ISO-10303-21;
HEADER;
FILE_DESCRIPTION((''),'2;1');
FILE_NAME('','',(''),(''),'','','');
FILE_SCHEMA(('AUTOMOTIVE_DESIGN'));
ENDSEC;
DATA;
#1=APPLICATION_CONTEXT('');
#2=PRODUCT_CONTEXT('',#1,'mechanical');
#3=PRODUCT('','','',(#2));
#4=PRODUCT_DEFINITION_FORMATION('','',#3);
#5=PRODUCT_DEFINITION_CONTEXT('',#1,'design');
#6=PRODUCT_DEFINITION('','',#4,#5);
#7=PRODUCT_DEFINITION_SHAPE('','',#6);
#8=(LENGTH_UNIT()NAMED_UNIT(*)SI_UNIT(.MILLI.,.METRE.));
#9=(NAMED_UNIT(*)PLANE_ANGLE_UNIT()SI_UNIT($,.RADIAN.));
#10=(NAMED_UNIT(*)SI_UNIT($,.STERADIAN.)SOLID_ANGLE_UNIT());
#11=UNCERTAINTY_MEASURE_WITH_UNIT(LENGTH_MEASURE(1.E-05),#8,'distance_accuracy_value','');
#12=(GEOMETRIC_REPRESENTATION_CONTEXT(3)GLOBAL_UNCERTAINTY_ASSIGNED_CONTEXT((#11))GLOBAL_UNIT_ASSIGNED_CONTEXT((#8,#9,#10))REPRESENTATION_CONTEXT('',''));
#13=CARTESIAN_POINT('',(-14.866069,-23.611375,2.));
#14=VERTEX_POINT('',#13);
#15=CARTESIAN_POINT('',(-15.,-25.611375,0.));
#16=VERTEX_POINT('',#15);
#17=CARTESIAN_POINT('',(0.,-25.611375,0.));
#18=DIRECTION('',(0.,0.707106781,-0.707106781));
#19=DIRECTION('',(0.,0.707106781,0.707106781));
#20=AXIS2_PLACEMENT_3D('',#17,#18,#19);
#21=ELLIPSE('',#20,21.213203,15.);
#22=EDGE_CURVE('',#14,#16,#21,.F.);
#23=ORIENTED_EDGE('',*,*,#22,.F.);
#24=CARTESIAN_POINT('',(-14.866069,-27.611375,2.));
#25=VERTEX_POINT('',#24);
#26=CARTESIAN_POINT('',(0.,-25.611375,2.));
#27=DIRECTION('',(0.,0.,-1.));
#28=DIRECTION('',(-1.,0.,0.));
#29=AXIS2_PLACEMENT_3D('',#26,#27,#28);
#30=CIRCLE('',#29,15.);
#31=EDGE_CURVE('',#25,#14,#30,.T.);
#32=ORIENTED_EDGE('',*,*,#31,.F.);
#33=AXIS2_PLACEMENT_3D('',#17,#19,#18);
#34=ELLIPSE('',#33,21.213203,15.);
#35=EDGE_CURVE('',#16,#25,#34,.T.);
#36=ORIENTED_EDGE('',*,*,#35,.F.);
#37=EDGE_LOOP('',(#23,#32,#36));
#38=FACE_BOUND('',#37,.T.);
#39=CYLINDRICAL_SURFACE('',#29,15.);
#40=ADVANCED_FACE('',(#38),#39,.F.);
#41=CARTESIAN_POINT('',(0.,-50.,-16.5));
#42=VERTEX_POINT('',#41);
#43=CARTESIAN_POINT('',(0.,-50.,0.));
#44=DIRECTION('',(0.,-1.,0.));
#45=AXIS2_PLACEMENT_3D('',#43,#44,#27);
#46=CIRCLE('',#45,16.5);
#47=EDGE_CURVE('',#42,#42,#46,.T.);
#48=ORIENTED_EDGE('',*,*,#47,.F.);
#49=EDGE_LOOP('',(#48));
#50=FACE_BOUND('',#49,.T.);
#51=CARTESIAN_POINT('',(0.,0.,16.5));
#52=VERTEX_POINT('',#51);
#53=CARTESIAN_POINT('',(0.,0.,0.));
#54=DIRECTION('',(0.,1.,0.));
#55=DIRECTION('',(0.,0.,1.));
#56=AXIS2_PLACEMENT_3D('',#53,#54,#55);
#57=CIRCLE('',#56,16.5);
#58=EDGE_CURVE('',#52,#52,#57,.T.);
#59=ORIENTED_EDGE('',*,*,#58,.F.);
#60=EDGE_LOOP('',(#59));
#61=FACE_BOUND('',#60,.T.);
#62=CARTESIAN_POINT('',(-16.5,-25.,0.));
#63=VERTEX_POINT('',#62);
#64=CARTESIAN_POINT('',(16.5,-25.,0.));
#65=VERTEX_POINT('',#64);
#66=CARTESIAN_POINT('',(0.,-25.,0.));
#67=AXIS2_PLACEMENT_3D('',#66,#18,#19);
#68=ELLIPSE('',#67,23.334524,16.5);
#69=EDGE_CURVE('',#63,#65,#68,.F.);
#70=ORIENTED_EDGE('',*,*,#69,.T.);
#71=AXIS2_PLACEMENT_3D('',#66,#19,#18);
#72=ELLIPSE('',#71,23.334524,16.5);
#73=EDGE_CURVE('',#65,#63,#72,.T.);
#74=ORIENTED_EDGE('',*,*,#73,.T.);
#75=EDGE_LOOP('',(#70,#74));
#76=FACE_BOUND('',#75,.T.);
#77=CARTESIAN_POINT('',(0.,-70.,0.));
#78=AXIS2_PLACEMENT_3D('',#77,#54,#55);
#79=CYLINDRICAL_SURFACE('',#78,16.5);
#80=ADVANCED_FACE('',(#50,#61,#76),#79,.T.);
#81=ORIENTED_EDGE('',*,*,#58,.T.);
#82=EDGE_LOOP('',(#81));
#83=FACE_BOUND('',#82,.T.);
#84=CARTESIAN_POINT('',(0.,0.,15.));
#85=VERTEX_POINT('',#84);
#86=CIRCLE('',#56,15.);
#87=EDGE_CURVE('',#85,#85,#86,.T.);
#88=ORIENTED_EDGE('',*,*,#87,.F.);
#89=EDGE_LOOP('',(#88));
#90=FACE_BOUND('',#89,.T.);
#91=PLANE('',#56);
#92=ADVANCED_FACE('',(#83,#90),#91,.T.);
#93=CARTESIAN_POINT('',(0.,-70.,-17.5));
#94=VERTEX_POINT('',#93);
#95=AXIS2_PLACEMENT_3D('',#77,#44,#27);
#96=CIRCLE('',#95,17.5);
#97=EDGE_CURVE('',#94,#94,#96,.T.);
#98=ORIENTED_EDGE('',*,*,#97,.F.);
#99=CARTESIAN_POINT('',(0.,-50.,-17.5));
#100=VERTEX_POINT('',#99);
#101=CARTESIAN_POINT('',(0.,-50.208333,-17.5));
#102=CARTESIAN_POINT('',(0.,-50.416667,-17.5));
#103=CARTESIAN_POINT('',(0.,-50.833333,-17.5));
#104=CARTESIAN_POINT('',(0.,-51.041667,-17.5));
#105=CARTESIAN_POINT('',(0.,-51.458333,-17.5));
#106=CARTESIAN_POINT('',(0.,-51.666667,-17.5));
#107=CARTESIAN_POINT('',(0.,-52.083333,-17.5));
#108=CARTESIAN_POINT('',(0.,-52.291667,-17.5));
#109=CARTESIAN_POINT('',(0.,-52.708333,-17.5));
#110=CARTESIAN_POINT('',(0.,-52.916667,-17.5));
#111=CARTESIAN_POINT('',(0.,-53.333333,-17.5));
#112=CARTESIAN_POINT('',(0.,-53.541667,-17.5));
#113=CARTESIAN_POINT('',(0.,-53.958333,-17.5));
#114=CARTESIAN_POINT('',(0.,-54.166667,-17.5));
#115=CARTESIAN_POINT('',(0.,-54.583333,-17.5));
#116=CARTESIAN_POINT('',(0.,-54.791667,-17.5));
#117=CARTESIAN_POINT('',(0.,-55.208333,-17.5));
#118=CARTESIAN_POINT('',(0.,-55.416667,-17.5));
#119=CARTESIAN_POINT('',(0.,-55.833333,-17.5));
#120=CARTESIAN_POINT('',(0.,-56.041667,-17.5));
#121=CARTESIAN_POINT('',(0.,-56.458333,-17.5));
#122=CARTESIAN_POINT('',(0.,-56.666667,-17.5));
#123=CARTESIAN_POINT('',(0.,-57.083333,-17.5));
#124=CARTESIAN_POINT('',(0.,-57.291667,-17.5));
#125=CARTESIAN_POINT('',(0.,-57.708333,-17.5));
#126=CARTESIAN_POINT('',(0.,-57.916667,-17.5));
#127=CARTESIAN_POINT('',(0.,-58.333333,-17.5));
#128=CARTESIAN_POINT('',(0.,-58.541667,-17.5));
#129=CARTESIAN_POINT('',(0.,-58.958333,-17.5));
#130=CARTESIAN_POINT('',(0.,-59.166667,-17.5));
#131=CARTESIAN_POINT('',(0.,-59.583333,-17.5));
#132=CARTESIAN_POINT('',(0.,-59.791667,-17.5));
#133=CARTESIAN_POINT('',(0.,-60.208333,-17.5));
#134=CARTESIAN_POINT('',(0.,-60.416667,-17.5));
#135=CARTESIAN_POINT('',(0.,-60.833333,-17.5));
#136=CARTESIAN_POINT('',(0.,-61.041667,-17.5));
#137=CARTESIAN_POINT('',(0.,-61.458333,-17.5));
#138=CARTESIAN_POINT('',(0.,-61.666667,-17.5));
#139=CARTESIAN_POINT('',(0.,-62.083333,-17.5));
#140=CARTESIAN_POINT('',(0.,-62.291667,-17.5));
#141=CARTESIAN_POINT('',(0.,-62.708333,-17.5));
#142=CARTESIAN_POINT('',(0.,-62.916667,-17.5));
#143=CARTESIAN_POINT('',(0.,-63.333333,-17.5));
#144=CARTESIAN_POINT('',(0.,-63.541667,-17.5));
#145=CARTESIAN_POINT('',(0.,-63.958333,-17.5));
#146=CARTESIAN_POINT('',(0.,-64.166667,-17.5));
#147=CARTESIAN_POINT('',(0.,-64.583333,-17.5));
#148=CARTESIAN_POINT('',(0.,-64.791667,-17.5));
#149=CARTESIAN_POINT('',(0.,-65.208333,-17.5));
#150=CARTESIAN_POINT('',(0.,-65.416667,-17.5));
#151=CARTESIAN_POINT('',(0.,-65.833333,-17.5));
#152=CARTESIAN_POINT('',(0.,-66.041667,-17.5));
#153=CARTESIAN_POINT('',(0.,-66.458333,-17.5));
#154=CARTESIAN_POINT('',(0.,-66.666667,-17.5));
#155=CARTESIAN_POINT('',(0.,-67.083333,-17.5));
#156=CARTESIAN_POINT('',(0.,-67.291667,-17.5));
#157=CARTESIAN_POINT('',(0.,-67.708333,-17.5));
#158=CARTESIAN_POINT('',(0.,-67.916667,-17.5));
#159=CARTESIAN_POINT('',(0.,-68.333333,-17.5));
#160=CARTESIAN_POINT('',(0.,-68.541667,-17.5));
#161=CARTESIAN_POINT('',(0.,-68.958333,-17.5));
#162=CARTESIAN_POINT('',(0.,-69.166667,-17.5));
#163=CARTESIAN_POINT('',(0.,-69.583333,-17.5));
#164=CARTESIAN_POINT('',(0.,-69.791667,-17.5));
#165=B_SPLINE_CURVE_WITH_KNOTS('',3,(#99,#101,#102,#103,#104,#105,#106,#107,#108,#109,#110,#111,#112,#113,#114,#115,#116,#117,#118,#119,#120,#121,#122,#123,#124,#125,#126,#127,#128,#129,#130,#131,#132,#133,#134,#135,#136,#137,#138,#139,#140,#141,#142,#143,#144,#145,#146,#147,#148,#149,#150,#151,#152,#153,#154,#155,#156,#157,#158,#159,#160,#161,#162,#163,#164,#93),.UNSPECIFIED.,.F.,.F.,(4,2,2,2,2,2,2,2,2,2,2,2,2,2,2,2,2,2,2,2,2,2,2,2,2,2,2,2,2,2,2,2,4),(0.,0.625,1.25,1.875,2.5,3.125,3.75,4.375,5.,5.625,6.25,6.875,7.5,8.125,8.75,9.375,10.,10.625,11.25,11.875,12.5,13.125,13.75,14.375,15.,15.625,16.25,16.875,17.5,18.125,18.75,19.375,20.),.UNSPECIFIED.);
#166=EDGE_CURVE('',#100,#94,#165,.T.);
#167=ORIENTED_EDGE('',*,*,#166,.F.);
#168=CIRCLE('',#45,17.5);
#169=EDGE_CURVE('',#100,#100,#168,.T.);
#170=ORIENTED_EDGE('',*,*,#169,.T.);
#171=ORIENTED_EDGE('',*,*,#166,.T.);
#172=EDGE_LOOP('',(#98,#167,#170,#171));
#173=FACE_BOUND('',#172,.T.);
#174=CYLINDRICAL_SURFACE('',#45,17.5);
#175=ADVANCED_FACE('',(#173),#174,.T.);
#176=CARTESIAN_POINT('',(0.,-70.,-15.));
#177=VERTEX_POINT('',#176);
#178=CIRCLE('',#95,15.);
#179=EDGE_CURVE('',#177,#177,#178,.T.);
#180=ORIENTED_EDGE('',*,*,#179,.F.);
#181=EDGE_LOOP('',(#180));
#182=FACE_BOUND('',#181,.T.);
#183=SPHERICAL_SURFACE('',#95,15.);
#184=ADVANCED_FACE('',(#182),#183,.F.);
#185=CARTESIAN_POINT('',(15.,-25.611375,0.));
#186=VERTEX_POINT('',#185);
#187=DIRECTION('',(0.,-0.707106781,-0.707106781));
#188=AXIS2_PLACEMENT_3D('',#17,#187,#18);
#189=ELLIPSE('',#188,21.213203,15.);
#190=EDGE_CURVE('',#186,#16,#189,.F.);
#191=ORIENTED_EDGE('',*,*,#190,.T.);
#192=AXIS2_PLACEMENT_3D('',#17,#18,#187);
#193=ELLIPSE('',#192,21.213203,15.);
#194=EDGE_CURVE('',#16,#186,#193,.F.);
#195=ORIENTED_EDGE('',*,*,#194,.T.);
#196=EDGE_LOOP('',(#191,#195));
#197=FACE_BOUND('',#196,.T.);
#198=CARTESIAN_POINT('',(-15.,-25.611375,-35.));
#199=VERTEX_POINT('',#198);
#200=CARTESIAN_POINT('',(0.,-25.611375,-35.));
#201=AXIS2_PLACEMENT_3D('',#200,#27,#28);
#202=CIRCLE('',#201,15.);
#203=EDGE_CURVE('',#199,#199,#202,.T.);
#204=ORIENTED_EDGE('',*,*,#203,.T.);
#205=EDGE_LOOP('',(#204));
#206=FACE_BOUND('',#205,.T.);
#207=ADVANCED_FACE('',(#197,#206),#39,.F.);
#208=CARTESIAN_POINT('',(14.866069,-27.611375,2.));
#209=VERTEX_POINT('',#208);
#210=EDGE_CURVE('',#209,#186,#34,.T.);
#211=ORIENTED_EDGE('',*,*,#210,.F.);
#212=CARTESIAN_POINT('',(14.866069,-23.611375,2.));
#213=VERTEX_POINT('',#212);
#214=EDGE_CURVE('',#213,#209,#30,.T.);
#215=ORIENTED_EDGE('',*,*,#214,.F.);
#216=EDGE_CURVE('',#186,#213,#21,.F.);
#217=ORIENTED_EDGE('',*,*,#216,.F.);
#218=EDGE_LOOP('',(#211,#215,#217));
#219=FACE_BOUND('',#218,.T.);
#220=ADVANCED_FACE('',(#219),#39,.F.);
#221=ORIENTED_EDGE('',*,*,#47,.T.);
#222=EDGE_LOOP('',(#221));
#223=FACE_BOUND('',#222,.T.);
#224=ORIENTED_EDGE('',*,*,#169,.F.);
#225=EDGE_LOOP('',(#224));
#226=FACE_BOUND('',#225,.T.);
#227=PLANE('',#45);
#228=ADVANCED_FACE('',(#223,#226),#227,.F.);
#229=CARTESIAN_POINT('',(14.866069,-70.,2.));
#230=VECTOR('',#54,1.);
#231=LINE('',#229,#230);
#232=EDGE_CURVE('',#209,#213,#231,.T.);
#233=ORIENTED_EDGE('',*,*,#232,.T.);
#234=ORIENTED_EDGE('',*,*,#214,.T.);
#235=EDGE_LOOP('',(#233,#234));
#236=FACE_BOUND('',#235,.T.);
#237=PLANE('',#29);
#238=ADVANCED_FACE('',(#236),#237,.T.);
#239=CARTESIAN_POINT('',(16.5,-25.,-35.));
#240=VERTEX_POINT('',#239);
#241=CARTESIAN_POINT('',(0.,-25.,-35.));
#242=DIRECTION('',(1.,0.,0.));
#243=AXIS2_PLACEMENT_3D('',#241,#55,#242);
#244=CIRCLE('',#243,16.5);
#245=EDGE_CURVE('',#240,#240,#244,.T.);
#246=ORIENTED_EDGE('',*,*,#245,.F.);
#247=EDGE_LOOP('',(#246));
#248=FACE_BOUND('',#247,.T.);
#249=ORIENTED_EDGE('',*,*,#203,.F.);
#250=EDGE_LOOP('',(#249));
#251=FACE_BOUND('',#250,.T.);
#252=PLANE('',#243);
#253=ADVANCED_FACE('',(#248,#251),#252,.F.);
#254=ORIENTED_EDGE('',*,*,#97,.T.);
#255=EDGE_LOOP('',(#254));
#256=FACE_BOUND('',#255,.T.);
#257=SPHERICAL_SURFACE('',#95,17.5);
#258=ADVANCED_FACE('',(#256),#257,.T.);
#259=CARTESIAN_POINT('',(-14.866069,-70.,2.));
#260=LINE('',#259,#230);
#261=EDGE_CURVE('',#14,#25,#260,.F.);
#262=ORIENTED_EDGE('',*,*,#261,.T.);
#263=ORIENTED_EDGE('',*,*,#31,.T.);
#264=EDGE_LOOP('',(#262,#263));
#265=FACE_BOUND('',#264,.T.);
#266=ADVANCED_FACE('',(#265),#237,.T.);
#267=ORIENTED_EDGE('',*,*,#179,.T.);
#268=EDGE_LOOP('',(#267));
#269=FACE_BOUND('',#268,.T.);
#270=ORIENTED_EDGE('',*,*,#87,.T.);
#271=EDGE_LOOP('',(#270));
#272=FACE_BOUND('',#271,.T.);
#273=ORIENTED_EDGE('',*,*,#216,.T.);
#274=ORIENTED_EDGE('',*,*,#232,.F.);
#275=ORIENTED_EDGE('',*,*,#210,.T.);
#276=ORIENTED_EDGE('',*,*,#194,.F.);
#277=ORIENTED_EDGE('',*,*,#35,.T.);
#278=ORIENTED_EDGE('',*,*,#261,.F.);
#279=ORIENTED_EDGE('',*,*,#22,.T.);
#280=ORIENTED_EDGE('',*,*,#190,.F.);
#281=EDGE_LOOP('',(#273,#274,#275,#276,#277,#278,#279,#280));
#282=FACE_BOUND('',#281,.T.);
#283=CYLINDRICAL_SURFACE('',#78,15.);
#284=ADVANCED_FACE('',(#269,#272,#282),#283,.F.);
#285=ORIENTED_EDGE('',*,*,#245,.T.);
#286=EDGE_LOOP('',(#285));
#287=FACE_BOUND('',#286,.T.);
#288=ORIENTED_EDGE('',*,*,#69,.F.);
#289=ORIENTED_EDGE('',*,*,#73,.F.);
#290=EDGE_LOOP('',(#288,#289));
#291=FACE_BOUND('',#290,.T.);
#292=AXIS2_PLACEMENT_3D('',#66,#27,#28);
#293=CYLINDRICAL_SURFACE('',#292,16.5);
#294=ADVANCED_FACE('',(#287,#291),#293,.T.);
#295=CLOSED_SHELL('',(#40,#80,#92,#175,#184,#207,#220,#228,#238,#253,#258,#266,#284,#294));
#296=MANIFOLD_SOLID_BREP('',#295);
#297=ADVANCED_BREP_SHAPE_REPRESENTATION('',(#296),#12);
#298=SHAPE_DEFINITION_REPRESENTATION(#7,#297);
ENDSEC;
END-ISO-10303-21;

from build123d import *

# Parameters (mm, degrees)
SKETCH1_R                = 15
BOSS_EXTRUDE1_DEPTH      = 70
SKETCH7_R                = 17.5
BOSS_EXTRUDE2_DEPTH      = 20
SKETCH8_R                = 16.5
SKETCH8_R_2              = 15
BOSS_EXTRUDE4_DEPTH      = 70
SKETCH10_R               = 15
CUT_EXTRUDE2_DEPTH       = 70
SKETCH24_R               = 15
CUT_EXTRUDE4_DEPTH       = 22
BOSS_EXTRUDE5_DEPTH      = 15
BOSS_EXTRUDE5_DEPTH_BACK = 20
SKETCH30_R               = 16.5
SKETCH31_R               = 15
CUT_EXTRUDE5_DEPTH       = 37
SKETCH32_R               = 15
CUT_EXTRUDE6_DEPTH       = 55


# Read off the part's stored shape, not the designer's step: Revolve1
with BuildPart() as part:
    # Sketch1 → Boss-Extrude1 (new body)
    with BuildSketch(Plane(origin=(0, 0, 0), x_dir=(1, 0, 0), z_dir=(0, 1, 0))):
        with Locations(Location((0, 0, 0), (0, 0, 270))):
            Circle(SKETCH1_R)
    extrude(amount=-BOSS_EXTRUDE1_DEPTH)

    # Sketch7 → Boss-Extrude2 (add)
    with BuildSketch(Plane.XZ.offset(70)):
        with Locations(Location((0, 0, 0), (0, 0, 270))):
            Circle(SKETCH7_R)
    extrude(amount=-BOSS_EXTRUDE2_DEPTH)

    # Sketch8 → Boss-Extrude4 (add)
    with BuildSketch(Plane(origin=(0, 0, 0), x_dir=(1, 0, 0), z_dir=(0, 1, 0))):
        with Locations(Location((0, 0, 0), (0, 0, 270))):
            Circle(SKETCH8_R)
        Circle(SKETCH8_R_2, mode=Mode.SUBTRACT)
    extrude(amount=-BOSS_EXTRUDE4_DEPTH)

    # Sketch10 → Cut-Extrude2 (cut)
    with BuildSketch(Plane(origin=(0, 0, 0), x_dir=(1, 0, 0), z_dir=(0, 1, 0))):
        with Locations(Location((0, 0, 0), (0, 0, 270))):
            Circle(SKETCH10_R)
    extrude(amount=-CUT_EXTRUDE2_DEPTH, mode=Mode.SUBTRACT)

    # Revolve1 outline → Revolve1 (revolve)
    with BuildSketch(Plane.XY):
        with BuildLine():
            Line((17.5, -69.999999983), (0, -69.999999992))
            Line((0, -69.999999992), (0, -87.5))
            ThreePointArc((0, -87.5), (12.374368677, -82.374368665), (17.5, -69.999999983))
        make_face()
    revolve(axis=Axis((0, 0, 0), (0, 1, 0)))

    # Sketch24 → Cut-Extrude4 (cut)
    with BuildSketch(Plane.XY):
        with Locations((0, -25)):
            Circle(SKETCH24_R)
    extrude(amount=-CUT_EXTRUDE4_DEPTH, mode=Mode.SUBTRACT)

    # Sketch28 → Cut-Revolve1 (revolve, cut)
    with BuildSketch(Plane.XY):
        with BuildLine():
            Line((15, -70), (-15, -70))
            ThreePointArc((-15, -70), (0, -85), (15, -70))
        make_face()
    revolve(axis=Axis((-15, -70, 0), (1, 0, 0)), mode=Mode.SUBTRACT)

    # Sketch30 → Boss-Extrude5 (add, two sides: drawn at the far end of the back side and taken through both)
    with BuildSketch(Plane.XY.offset(-15).offset(-BOSS_EXTRUDE5_DEPTH_BACK)):
        with Locations((0, -25)):
            Circle(SKETCH30_R)
    extrude(amount=BOSS_EXTRUDE5_DEPTH + BOSS_EXTRUDE5_DEPTH_BACK)

    # Sketch31 → Cut-Extrude5 (cut)
    with BuildSketch(Plane(origin=(0, 0, -35), x_dir=(-1, 0, 0), z_dir=(0, 0, -1))):
        with Locations((0, -25.611375347)):
            Circle(SKETCH31_R)
    extrude(amount=-CUT_EXTRUDE5_DEPTH, mode=Mode.SUBTRACT)

    # Sketch32 → Cut-Extrude6 (cut)
    with BuildSketch(Plane(origin=(0, 0, 0), x_dir=(1, 0, 0), z_dir=(0, 1, 0))):
        with Locations(Location((0, 0, 0), (0, 0, 270))):
            Circle(SKETCH32_R)
    extrude(amount=-CUT_EXTRUDE6_DEPTH, mode=Mode.SUBTRACT)


solid = part.part
